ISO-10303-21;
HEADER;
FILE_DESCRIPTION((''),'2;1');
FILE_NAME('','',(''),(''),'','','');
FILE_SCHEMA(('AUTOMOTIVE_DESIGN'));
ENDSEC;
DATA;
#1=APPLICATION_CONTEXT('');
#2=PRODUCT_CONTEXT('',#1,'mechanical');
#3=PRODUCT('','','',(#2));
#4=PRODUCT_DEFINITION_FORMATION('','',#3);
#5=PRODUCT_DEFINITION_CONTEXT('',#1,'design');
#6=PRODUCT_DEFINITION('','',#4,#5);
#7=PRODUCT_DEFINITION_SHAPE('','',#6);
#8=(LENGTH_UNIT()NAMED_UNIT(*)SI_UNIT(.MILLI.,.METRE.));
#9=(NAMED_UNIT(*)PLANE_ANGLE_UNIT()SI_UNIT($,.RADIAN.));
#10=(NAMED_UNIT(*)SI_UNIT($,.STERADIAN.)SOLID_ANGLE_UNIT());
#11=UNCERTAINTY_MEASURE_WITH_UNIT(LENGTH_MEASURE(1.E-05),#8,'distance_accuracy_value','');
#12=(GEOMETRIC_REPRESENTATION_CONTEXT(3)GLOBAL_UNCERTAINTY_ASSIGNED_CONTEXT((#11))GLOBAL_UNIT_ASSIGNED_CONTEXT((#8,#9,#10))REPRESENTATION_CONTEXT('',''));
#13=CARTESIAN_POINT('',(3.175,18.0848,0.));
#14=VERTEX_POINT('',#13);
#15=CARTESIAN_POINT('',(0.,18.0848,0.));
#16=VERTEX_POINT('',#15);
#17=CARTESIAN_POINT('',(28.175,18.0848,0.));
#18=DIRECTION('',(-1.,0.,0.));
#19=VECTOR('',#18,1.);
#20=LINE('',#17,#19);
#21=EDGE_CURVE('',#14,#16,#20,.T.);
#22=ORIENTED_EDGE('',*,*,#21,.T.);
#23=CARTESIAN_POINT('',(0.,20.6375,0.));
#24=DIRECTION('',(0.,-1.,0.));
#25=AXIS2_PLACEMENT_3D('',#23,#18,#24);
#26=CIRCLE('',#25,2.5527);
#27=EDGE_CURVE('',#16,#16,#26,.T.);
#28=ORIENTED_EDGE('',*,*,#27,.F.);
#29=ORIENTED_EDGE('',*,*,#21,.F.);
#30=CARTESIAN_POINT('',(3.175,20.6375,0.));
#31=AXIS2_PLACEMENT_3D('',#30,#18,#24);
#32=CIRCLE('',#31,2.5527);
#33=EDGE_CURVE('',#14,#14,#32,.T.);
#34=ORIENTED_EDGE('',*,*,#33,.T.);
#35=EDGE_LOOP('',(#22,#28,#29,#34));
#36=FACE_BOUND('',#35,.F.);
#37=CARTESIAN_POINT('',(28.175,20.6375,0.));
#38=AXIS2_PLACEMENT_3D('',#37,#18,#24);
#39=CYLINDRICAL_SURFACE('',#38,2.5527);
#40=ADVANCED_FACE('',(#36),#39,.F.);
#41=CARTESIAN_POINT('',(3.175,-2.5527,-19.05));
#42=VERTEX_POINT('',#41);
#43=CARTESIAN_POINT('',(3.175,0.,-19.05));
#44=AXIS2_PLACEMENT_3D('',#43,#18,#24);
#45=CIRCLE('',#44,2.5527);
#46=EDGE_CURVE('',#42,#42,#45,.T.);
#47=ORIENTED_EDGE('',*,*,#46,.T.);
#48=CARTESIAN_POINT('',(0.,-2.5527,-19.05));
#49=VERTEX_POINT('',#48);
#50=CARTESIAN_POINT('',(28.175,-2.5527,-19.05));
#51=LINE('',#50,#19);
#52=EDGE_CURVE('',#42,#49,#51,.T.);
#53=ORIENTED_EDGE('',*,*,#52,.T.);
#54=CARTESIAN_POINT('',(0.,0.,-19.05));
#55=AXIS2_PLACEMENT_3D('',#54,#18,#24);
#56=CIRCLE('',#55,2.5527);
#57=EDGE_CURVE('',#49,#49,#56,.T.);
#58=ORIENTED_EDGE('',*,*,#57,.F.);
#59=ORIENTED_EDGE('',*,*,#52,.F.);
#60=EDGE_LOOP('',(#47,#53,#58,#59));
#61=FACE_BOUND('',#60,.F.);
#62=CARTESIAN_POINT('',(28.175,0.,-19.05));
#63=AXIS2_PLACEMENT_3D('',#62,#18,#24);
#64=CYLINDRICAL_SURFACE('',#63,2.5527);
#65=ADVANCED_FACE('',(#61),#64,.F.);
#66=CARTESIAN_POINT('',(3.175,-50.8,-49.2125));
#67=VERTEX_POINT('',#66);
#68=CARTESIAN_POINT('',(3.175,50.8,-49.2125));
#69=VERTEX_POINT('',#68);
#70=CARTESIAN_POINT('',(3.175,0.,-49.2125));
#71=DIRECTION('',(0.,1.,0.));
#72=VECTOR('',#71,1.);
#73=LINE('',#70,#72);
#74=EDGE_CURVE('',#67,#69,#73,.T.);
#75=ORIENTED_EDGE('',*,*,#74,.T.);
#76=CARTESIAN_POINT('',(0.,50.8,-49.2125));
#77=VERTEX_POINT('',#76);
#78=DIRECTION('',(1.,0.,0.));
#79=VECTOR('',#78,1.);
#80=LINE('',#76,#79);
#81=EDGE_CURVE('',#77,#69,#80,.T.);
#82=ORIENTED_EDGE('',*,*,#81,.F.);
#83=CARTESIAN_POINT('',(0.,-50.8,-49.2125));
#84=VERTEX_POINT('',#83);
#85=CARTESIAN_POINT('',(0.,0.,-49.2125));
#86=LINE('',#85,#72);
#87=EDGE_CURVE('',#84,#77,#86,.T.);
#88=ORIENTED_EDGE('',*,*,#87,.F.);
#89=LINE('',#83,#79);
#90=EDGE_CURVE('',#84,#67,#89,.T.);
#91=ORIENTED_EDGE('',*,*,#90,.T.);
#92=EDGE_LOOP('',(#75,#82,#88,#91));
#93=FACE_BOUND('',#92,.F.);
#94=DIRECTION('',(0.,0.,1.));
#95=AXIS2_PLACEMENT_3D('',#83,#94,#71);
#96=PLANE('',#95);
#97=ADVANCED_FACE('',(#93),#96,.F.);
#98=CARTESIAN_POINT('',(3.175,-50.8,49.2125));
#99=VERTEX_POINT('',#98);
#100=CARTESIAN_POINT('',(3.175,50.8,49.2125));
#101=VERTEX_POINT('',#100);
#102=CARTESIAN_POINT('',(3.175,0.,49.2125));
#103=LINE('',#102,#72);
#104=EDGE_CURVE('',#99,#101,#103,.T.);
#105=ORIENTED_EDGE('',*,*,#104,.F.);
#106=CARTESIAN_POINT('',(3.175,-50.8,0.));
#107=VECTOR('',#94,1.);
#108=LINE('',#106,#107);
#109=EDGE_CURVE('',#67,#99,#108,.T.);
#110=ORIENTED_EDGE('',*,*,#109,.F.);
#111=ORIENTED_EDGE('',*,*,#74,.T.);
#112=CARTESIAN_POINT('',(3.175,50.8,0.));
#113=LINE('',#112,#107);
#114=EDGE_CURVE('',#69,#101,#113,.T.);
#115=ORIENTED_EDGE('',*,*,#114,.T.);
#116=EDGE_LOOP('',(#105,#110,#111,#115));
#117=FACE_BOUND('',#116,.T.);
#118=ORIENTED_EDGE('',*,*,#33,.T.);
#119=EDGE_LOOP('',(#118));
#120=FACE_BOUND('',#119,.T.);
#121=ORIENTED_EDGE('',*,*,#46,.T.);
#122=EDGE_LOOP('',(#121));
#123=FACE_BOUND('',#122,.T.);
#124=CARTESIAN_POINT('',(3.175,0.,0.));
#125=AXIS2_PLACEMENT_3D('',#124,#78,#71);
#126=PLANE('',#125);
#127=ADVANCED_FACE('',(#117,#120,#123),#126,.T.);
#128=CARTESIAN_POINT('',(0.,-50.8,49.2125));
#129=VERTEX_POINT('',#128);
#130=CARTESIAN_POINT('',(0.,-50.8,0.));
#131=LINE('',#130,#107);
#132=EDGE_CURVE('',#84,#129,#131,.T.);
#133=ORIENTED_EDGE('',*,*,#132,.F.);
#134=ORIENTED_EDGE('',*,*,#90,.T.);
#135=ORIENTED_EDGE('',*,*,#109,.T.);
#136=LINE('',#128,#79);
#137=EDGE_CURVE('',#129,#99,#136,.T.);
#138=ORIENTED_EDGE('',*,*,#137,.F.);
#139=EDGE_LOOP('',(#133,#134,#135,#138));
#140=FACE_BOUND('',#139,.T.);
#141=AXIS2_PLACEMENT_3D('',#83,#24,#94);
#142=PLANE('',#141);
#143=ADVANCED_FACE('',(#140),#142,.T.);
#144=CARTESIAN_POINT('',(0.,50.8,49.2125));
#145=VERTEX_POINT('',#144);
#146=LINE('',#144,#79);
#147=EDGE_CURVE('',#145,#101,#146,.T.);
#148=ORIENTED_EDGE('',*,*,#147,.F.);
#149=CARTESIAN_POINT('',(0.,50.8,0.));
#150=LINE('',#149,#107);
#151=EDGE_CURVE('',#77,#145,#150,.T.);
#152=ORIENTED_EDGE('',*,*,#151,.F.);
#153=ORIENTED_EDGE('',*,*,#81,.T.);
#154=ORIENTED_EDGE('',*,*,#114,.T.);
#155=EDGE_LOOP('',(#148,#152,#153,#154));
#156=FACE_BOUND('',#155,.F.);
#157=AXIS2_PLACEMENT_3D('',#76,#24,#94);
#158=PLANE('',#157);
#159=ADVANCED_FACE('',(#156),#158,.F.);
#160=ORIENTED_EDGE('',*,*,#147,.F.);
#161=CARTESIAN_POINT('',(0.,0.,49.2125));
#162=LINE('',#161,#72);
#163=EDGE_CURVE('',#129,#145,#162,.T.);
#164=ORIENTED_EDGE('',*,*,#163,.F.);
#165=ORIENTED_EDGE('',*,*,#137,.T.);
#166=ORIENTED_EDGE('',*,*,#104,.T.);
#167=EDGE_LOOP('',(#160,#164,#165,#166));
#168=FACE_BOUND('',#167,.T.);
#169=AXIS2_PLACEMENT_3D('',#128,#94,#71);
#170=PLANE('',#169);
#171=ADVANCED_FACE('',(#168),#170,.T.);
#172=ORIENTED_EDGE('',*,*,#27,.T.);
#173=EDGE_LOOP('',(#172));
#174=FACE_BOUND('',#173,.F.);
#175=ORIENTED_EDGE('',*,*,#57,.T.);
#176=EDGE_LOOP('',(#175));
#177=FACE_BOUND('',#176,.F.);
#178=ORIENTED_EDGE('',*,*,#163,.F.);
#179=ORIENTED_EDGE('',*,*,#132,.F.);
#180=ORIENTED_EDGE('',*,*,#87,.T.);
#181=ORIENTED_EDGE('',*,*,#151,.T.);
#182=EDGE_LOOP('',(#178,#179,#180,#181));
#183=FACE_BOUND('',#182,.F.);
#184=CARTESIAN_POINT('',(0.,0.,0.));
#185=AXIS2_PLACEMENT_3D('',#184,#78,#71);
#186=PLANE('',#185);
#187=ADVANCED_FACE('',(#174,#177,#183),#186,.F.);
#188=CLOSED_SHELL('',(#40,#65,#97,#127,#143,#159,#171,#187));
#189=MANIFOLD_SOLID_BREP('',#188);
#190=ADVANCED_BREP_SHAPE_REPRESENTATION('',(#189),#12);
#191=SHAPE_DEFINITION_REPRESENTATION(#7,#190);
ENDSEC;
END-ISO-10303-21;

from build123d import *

# Parameters (mm, degrees)
F0_W     = 101.6
F0_H     = 98.425
F1_DEPTH = 3.175
F3_D     = 5.1054
F3_DEPTH = 25
F3_TIP   = 1.5338169022


# Not quite as in the source:
# - a length typed as a fraction of an inch, garbled in the dataset ("3 / 203.2 mm" for 3/8 in), is restored


with BuildPart() as f1:
    # F0 (on Right) → F1 (new body)
    with BuildSketch(Plane.YZ):
        Rectangle(F0_W, F0_H)
    extrude(amount=F1_DEPTH)

    # F3
    with Locations(Plane.YZ.offset(3.175)):
        with Locations((0, -19.05), (20.6375, 0)):
            Hole(F3_D / 2, depth=F3_DEPTH)
            with Locations((0, 0, -(F3_DEPTH + F3_TIP / 2))):  # 118° drill point
                Cone(0, F3_D / 2, F3_TIP, mode=Mode.SUBTRACT)


solid = f1.part
